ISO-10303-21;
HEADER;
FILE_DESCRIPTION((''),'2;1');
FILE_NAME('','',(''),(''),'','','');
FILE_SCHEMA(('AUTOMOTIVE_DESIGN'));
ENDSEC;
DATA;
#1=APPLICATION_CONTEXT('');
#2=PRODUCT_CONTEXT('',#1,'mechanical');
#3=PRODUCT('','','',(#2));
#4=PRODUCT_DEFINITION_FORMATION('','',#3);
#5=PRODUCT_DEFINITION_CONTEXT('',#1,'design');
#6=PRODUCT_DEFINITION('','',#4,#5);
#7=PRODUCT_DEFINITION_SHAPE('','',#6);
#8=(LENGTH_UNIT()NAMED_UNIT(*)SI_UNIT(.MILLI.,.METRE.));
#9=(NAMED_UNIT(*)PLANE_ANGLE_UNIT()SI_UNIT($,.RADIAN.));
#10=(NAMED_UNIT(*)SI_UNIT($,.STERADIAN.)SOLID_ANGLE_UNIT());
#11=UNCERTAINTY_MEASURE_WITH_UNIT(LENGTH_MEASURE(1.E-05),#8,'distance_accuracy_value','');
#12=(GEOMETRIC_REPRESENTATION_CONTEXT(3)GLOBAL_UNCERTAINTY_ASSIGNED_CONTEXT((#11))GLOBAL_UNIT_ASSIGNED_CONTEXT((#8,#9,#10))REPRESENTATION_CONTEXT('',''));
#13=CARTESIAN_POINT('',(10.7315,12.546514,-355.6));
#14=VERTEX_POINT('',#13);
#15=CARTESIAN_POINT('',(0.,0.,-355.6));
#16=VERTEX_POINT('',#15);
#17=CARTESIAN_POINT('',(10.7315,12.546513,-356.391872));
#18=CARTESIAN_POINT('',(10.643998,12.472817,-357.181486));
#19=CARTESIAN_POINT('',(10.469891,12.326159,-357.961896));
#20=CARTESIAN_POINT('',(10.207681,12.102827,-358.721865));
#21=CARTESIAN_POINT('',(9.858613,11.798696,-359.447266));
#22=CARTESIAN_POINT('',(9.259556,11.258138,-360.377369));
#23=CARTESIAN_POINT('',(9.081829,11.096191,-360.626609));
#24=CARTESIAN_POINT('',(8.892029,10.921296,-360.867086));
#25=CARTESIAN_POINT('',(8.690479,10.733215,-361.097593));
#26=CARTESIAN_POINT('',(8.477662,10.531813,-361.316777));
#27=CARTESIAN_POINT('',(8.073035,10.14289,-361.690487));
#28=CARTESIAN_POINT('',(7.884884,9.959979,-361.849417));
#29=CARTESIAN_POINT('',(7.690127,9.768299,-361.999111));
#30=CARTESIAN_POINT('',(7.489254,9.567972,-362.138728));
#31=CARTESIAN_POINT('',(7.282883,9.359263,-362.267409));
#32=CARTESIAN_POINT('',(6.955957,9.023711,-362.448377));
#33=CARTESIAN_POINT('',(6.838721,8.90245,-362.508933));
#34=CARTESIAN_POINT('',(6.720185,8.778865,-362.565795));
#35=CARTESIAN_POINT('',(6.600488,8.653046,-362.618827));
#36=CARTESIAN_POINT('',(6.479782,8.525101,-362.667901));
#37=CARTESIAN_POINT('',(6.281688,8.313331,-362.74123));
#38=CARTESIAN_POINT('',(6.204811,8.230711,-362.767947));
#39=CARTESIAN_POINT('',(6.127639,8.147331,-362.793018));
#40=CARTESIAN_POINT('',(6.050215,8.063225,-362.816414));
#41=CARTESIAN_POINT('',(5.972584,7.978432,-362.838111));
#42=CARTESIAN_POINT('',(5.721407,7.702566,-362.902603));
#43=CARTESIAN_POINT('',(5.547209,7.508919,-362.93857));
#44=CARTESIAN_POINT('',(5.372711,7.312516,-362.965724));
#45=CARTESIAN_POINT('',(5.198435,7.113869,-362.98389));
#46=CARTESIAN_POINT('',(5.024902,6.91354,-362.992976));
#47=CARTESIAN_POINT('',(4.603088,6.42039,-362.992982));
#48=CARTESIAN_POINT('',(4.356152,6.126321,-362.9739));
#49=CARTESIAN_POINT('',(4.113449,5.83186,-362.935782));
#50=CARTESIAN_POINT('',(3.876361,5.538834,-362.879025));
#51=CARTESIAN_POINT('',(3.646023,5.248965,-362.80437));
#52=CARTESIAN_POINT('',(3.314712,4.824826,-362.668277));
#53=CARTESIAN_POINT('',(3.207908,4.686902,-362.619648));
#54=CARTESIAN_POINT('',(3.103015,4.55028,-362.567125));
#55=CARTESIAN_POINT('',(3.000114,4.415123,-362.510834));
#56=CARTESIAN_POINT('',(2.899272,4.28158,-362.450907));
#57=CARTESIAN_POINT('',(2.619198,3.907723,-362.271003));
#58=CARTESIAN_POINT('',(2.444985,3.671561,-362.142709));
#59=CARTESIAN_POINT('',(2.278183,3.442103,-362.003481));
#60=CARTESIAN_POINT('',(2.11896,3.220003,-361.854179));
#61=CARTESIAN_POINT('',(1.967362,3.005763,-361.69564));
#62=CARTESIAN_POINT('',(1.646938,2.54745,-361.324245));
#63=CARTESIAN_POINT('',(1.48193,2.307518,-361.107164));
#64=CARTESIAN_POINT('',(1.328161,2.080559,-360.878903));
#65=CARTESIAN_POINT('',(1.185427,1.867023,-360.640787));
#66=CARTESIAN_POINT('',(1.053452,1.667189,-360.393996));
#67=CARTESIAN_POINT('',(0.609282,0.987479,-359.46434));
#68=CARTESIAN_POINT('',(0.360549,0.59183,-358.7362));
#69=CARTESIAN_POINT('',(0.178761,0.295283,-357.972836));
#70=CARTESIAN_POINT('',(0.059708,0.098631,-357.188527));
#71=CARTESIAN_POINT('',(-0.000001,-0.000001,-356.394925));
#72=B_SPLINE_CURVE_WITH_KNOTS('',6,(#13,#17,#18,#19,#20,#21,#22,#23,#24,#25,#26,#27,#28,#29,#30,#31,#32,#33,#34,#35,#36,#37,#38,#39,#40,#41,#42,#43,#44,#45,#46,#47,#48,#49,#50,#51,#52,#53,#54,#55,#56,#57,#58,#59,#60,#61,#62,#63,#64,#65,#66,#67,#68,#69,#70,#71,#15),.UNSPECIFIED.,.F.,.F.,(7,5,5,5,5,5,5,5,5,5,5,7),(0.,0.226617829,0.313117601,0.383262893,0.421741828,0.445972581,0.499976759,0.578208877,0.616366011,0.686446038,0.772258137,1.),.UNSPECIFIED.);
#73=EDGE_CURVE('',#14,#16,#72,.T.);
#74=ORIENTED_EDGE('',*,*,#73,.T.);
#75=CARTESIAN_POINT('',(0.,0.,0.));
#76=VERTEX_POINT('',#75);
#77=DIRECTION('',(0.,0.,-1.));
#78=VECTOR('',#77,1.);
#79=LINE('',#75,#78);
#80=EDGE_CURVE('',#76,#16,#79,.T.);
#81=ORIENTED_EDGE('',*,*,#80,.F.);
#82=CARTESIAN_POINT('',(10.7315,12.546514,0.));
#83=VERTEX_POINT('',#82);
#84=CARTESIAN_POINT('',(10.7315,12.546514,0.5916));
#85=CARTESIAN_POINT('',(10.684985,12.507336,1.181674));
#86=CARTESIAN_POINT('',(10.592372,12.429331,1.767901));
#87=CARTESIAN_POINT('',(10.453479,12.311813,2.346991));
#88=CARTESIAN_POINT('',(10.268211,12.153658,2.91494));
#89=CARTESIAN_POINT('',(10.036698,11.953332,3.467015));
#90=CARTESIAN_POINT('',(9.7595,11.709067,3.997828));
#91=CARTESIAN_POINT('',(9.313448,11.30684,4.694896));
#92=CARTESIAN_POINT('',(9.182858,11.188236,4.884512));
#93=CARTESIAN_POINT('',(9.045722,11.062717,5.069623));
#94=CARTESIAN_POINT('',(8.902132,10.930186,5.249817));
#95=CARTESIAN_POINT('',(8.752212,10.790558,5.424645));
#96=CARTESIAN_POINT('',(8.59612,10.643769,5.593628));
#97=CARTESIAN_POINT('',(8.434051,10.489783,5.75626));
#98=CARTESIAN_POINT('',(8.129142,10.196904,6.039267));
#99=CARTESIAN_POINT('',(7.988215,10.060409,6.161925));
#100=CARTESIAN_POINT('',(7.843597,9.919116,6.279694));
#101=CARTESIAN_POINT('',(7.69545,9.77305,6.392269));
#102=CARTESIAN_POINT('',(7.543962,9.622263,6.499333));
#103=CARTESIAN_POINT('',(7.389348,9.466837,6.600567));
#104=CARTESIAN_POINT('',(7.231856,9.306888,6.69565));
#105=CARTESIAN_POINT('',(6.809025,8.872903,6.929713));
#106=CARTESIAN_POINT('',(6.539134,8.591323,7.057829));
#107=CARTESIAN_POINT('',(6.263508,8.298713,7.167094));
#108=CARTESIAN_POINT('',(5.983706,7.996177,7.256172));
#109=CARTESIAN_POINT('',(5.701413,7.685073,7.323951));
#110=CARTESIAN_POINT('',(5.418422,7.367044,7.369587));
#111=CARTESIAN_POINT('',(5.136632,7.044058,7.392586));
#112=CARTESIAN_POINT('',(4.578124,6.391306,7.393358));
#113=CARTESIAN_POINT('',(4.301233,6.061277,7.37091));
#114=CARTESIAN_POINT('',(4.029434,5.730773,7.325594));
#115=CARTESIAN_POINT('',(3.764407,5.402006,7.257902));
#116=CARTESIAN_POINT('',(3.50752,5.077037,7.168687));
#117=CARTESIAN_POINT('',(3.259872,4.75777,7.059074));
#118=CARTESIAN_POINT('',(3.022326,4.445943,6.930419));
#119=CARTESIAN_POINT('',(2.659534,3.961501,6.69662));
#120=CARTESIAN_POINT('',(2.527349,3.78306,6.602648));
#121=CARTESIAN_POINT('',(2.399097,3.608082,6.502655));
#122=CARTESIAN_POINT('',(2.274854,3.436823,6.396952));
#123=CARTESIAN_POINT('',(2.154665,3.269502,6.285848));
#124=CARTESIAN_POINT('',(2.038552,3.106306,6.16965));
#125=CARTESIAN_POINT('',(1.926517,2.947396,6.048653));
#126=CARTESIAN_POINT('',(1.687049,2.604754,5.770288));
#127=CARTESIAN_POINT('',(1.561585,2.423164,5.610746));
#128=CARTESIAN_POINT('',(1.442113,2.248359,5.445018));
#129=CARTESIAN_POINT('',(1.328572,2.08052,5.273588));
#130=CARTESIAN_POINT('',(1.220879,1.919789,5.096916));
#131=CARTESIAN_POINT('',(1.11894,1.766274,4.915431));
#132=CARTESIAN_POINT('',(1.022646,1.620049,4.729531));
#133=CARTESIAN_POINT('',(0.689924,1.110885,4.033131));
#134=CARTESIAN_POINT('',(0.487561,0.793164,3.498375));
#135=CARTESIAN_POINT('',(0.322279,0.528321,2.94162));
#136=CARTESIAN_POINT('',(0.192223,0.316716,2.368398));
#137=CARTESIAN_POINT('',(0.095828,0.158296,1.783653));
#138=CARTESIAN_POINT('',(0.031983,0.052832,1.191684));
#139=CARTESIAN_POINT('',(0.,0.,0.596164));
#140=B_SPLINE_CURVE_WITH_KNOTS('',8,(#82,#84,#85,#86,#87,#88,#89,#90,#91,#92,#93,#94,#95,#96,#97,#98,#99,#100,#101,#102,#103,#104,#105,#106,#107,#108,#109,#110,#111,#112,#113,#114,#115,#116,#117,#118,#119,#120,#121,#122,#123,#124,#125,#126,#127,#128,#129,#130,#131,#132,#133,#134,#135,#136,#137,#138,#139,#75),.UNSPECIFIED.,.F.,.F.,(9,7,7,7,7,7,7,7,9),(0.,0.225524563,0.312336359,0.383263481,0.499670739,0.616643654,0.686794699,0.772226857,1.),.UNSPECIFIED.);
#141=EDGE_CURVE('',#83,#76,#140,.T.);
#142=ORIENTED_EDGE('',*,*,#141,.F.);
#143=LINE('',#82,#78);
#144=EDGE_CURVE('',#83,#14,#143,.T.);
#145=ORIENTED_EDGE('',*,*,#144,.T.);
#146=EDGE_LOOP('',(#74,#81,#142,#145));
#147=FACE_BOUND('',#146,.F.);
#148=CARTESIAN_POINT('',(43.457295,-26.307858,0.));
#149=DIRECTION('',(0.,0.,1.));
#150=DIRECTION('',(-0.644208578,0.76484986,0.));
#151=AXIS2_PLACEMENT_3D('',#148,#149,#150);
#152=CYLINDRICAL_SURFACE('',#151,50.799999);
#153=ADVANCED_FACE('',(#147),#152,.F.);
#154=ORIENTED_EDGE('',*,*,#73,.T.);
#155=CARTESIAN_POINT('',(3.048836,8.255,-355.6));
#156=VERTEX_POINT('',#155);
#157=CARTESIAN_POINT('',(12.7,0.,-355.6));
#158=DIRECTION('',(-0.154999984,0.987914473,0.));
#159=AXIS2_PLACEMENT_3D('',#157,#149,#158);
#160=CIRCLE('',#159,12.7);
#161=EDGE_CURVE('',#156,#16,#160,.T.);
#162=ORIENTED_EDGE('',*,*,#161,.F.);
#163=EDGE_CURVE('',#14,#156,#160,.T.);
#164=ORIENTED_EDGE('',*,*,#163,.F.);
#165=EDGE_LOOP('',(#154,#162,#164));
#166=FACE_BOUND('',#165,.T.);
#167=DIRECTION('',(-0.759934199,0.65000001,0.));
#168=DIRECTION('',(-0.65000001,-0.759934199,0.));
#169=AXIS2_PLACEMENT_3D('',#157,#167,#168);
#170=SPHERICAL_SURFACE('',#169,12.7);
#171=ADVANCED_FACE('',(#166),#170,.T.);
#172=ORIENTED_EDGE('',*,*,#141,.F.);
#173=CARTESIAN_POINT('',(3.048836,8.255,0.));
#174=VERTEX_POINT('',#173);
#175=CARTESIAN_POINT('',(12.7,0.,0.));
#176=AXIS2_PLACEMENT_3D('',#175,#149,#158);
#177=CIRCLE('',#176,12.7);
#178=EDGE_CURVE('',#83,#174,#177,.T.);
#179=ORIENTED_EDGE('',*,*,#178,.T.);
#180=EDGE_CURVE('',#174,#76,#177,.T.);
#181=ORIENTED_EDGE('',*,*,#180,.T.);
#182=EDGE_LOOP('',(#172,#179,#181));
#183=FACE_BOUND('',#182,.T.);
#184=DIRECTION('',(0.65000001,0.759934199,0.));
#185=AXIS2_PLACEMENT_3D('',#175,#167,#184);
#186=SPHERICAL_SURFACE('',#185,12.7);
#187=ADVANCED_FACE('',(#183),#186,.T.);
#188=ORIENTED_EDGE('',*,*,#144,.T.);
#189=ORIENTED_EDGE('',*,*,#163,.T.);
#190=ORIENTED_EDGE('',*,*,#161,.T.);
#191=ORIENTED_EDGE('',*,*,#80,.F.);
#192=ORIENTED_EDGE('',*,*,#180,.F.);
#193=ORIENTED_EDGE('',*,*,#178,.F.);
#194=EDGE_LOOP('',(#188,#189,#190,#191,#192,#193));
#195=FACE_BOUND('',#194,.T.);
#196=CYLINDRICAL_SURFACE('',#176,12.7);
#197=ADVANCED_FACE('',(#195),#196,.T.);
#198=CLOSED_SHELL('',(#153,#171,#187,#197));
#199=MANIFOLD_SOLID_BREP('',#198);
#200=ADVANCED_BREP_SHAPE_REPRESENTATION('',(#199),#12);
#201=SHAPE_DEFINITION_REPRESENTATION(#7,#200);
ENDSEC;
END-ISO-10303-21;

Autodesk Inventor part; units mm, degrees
ref_plane "YZ Plane" through (0, 0, 0) normal (1, 0, 0) x (0, 1, 0)
ref_plane "XZ Plane" through (0, 0, 0) normal (0, 1, 0) x (-1, 0, 0)
sketch "Sketch1" plane through (0, 0, 0) normal (0, 0, 1) x (1, 0, 0)
  arc A0 (10.7315, 12.546514) -> (0, 0) centre (12.7, 0) ccw
  arc A1 (10.7315, 12.546514) -> (0, 0) centre (43.457296, -26.307859) ccw
  dimension "d4" = 12.7
  dimension "d5" = 50.8
  dimension "d6" = 16.51
extrude "Extrusion1" add sketch "Sketch1" against normal blind 355.6
sketch "Sketch2" plane through (0, 0, 0) normal (0, 0, 1) x (1, 0, 0)
  arc A0 (10.7315, 12.546514) -> (0, 0) centre (12.7, 0) ccw
  arc A1 (10.7315, 12.546514) -> (0, 0) centre (43.457296, -26.307859) ccw
  line L0 (3.048836, 8.255) -> (4.852638, 6.712141)
revolve "Revolution1" add sketch "Sketch2" angle 180 about axis through (3.048836, 8.255, 0) along (0.7599342, -0.65, 0) picked at (4.382184, 8.416293) contours A1 L0 A0
sketch "Sketch4" plane through (0, 0, -355.6) normal (0, 0, -1) x (-1, 0, 0)
  arc A0 (0, 0) -> (-10.7315, 12.546514) centre (-12.7, 0) ccw
  arc A1 (0, 0) -> (-10.7315, 12.546514) centre (-43.457296, -26.307859) ccw
  line L0 (-3.048836, 8.255) -> (-4.852638, 6.712141)
revolve "Revolution2" add sketch "Sketch4" angle 180 about axis through (3.048836, 8.255, -355.6) along (0.7599342, -0.65, 0) picked at (-3.096161, 6.912766) contours A1 L0 A0
sketch "Sketch5" plane through (0, 0, 0) normal (0, 0, 1) x (1, 0, 0)
  arc A0 (10.7315, 12.546514) -> (0, 0) centre (43.457296, -26.307859) ccw
  line L0 (0, 0) -> (10.7315, 12.546514)
extrude "Extrusion2" cut sketch "Sketch5" along normal through all both and the other way through all
ref_plane "Work Plane1" through (0, 0, 0) normal (0, 0, 1) x (1, 0, 0)
properties part number "PrimaryHullWireCover" material "Carbon Fiber PLA"
